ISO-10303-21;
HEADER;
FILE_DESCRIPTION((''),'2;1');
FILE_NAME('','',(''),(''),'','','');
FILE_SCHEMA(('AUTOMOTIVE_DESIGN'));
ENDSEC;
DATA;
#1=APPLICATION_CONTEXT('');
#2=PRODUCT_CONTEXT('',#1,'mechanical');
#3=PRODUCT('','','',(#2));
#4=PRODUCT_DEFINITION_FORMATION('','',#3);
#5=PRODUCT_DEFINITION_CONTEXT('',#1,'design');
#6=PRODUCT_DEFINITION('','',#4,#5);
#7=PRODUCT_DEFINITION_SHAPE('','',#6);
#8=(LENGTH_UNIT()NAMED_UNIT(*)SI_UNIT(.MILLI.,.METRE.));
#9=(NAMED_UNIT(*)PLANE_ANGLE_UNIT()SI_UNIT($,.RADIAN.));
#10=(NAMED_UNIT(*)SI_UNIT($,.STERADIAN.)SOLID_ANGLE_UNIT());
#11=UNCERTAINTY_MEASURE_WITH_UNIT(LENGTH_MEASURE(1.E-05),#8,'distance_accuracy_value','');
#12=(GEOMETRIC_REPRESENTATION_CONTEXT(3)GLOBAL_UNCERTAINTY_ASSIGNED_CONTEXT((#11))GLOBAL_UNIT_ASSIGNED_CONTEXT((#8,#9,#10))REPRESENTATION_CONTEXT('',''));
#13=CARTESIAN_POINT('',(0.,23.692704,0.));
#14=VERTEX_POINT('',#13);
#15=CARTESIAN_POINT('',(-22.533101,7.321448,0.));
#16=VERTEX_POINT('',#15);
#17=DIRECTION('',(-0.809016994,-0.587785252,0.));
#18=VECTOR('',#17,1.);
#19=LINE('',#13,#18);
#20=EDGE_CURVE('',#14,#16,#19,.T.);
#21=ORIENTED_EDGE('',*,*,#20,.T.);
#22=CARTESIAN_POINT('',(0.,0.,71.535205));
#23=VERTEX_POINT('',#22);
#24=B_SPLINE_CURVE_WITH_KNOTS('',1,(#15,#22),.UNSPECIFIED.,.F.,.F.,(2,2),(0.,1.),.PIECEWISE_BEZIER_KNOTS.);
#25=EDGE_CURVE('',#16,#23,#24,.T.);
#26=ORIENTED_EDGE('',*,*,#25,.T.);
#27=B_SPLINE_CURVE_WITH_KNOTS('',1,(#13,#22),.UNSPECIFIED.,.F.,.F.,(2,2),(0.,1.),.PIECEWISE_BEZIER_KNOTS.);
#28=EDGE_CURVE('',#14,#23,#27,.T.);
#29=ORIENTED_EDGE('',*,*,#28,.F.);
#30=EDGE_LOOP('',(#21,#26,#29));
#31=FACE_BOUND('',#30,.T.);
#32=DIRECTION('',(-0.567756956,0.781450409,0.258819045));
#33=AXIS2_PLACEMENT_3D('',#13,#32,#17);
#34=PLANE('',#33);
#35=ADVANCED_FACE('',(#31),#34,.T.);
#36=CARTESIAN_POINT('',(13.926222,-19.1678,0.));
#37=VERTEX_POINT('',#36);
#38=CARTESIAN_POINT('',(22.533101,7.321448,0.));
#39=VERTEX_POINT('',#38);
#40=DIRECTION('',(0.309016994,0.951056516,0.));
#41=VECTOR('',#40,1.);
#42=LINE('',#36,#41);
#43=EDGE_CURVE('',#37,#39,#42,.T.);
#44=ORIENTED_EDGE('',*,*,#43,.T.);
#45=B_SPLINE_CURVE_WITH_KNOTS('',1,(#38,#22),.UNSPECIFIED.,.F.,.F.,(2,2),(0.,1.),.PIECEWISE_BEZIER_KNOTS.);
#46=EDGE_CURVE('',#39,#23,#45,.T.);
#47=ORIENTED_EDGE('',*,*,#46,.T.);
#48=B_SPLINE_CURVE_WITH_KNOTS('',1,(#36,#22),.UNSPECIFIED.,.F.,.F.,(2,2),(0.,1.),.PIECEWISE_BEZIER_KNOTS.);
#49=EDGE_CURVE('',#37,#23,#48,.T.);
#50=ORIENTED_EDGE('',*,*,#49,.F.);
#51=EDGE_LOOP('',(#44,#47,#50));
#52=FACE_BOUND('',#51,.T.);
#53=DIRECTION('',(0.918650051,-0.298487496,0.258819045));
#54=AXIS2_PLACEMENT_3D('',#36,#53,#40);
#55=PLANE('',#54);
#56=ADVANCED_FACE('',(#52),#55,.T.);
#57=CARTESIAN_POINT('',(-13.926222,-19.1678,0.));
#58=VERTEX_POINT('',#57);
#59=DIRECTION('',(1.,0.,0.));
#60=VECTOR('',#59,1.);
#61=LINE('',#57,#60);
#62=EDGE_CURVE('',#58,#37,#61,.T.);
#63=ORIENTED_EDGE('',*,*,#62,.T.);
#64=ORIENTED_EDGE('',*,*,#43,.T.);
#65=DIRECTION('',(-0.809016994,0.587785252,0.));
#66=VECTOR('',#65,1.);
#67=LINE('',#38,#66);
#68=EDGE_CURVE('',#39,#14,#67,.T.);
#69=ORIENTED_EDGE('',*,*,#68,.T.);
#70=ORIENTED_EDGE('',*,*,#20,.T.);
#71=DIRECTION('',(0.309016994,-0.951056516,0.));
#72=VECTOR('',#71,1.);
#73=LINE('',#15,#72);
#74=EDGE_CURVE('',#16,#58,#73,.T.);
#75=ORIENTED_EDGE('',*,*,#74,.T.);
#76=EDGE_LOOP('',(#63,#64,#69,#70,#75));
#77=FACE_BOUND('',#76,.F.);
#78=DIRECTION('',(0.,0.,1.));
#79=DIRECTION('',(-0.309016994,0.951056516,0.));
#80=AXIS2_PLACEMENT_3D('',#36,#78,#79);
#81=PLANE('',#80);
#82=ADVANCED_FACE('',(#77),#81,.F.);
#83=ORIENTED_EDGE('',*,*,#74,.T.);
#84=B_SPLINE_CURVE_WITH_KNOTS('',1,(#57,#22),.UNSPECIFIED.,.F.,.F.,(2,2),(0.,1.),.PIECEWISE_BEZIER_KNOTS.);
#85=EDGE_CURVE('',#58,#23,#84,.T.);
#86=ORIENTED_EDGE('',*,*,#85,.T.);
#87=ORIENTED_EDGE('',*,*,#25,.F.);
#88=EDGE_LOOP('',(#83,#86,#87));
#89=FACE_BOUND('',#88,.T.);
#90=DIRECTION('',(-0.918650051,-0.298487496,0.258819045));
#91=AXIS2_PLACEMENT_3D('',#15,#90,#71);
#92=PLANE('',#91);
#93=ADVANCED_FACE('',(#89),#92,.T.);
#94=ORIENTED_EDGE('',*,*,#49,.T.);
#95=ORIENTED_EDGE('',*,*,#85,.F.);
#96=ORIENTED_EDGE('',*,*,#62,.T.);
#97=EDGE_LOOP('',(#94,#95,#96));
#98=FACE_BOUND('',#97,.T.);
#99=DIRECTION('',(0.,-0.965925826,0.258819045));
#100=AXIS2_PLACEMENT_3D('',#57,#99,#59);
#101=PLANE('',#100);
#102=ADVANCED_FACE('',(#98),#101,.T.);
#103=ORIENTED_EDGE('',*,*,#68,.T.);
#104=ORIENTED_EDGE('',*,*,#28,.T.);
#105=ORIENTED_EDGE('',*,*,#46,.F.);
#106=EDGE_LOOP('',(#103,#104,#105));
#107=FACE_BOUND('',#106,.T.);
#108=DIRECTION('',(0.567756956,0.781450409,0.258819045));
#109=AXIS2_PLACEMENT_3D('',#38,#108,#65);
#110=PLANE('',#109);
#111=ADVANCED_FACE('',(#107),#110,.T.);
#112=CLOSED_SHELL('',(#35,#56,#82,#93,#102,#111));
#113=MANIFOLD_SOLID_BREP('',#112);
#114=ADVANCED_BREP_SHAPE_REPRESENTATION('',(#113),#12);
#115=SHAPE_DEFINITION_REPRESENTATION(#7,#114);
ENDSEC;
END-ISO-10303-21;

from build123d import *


# Not quite as in the source:
# - an extrude whose draft closes it to a point is written as a loft to that point


with BuildPart() as f1:
    # F0 (on Top) → F1 section 0
    with BuildSketch(Plane.XY, mode=Mode.PRIVATE) as f1_s0:
        Polygon((13.9262220778, -19.1678002884), (22.5331006568, 7.3214482206), (0, 23.6927041356), (-22.5331006568, 7.3214482206), (-13.9262220778, -19.1678002884), align=None)
    loft([f1_s0.sketch, Vertex(0, 0, 71.5352045456)], ruled=True)


solid = f1.part
